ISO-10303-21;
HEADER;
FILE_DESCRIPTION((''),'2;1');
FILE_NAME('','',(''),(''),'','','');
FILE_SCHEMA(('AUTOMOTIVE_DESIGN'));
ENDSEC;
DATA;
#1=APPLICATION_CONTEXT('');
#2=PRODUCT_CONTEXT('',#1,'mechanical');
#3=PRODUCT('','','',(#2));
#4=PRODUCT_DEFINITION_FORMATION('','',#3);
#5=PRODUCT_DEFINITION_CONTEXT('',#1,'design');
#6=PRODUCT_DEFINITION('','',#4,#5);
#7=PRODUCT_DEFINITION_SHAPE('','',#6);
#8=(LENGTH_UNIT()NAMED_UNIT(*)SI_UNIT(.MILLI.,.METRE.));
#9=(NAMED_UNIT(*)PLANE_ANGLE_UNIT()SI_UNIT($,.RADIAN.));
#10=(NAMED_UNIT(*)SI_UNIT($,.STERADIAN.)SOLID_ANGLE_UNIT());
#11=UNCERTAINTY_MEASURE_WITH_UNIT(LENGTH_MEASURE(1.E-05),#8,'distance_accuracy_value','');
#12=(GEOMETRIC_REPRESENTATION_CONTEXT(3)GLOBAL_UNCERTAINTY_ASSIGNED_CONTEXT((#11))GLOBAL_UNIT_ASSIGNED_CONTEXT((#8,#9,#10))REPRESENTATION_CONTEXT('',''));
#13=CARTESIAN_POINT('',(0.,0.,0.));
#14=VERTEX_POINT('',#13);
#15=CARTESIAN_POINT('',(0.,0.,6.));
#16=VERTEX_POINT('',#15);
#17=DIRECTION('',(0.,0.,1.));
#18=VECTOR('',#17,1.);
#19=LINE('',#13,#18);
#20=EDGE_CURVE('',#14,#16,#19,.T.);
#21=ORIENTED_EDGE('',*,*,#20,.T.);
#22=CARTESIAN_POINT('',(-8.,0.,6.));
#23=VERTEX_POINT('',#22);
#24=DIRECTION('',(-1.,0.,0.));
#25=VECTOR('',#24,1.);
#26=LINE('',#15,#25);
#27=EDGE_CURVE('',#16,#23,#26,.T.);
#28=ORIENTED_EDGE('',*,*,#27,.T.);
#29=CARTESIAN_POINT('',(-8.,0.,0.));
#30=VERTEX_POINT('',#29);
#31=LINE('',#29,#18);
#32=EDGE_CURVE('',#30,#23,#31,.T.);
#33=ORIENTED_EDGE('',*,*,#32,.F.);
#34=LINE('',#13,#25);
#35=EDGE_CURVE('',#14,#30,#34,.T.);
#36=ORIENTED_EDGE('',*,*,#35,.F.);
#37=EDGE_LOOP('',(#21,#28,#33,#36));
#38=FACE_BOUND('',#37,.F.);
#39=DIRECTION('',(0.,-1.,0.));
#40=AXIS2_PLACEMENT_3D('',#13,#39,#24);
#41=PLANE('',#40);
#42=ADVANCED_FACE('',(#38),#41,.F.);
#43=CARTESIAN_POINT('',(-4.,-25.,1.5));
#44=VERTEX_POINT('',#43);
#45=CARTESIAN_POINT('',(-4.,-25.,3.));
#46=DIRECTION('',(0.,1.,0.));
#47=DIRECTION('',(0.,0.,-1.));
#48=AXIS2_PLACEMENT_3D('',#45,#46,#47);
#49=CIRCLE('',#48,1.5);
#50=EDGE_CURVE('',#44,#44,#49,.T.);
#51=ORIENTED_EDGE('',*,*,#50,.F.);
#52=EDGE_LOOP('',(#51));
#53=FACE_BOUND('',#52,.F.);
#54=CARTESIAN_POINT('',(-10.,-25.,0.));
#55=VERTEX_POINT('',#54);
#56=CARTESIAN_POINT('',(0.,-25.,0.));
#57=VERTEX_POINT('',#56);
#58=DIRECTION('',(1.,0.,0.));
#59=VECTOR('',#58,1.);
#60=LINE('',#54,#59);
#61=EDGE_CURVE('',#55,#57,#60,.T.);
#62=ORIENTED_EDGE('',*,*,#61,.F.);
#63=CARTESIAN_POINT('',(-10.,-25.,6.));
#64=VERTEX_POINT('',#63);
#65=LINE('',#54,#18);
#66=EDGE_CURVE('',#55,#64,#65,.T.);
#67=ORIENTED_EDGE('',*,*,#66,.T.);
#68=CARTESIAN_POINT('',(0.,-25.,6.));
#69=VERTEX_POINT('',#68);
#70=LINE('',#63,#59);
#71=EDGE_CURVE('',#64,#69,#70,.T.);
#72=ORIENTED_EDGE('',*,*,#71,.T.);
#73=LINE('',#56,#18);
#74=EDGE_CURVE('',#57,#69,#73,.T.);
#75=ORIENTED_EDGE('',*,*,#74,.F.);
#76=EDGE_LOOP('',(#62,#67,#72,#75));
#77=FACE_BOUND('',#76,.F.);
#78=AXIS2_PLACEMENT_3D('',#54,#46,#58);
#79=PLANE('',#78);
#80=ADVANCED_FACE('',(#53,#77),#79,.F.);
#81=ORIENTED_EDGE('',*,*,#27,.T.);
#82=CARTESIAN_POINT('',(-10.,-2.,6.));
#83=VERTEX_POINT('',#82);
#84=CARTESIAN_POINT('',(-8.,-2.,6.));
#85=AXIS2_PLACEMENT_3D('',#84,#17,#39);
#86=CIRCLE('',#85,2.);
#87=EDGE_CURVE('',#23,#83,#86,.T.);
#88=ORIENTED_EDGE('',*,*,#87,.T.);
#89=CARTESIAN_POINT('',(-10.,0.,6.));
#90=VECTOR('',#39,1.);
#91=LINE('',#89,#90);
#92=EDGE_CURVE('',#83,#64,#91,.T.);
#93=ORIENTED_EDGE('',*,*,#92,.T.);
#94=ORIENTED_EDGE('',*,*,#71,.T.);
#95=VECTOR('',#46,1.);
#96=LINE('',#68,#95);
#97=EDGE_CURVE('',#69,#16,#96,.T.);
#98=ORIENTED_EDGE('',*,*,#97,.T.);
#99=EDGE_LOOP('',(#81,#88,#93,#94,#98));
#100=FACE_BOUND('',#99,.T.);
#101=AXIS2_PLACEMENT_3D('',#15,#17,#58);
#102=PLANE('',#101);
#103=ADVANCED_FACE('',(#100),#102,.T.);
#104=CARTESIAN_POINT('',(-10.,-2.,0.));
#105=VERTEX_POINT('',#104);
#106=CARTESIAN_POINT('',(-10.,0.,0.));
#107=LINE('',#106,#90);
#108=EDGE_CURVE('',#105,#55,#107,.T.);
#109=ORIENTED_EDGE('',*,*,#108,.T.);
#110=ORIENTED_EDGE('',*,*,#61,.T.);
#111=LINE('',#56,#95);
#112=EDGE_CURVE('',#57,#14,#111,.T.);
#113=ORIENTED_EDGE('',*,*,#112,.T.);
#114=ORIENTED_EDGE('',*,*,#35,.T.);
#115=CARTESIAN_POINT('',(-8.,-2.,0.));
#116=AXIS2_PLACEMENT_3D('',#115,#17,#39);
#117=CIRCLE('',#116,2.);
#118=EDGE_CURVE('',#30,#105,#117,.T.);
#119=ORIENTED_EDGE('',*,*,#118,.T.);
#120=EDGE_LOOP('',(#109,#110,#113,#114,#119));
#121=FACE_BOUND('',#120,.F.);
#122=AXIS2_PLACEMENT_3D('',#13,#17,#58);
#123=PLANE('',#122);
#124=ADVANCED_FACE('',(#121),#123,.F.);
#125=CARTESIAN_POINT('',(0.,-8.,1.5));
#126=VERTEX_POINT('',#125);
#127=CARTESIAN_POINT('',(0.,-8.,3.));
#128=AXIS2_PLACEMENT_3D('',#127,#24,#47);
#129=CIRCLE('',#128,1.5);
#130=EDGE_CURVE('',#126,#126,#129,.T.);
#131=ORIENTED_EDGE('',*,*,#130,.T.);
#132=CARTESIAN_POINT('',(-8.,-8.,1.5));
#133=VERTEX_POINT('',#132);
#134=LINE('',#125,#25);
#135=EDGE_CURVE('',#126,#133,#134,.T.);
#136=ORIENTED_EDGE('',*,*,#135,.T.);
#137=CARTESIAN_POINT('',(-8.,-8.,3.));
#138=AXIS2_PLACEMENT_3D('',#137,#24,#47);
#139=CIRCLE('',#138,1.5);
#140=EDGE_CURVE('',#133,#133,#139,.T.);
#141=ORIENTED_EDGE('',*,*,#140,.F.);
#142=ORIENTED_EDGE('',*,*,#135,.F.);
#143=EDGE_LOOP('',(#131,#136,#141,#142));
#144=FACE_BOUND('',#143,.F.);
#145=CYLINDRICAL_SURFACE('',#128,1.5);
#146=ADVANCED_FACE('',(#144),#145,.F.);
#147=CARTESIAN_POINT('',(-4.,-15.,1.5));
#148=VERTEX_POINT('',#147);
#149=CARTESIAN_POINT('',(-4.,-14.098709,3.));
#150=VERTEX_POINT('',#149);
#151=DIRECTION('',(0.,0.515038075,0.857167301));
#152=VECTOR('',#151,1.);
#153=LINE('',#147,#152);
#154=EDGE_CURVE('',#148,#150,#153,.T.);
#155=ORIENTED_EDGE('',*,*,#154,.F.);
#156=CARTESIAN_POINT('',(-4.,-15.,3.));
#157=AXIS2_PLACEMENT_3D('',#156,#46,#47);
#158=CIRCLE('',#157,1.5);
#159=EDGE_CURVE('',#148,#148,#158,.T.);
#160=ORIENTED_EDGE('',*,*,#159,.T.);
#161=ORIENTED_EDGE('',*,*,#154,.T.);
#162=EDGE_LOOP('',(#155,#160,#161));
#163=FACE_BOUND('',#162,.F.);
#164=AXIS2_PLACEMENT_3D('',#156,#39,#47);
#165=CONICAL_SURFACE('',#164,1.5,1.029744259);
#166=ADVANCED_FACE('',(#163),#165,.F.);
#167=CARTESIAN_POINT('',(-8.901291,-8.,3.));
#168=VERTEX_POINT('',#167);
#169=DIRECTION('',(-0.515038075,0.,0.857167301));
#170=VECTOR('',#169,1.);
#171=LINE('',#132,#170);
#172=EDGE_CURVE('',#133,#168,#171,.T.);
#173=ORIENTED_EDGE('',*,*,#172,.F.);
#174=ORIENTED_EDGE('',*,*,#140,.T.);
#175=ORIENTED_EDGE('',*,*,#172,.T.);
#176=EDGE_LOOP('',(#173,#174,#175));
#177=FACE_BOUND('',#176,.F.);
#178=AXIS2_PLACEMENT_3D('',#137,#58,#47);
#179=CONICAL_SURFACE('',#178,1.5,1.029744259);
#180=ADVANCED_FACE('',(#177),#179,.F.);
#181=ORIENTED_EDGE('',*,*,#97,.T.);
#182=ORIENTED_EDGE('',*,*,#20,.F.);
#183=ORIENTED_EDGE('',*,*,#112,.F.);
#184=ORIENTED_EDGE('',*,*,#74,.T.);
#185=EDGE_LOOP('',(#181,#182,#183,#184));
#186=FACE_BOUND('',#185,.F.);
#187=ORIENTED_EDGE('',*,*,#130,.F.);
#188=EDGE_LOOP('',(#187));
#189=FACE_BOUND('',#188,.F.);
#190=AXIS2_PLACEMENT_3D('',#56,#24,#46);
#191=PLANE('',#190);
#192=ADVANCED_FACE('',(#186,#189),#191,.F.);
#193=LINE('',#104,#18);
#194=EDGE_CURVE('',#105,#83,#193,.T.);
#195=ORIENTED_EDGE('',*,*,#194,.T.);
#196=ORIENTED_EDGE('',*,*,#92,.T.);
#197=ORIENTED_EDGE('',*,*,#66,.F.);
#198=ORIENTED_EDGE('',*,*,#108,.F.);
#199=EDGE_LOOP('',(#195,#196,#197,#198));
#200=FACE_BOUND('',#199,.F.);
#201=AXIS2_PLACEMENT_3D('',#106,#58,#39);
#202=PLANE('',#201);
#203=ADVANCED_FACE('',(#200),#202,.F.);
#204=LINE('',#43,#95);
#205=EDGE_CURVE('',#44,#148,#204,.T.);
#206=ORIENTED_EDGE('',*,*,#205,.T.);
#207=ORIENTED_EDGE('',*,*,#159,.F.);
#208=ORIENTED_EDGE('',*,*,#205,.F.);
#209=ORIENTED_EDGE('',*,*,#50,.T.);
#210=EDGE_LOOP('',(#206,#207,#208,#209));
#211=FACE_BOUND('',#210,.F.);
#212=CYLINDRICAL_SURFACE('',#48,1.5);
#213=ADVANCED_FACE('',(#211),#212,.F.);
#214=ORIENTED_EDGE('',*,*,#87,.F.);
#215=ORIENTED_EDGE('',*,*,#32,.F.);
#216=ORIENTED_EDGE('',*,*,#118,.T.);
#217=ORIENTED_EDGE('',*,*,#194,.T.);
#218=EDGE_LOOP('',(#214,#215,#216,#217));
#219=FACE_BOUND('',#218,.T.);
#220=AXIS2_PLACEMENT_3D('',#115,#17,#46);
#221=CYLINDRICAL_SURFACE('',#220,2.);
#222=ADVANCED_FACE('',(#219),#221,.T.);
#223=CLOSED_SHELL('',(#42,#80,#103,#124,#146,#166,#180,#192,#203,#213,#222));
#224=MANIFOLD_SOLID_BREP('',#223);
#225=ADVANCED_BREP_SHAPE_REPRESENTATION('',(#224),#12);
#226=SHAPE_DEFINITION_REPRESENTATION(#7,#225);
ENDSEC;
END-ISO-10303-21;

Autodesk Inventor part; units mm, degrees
ref_plane "YZ Plane" through (0, 0, 0) normal (1, 0, 0) x (0, 1, 0)
ref_plane "XZ Plane" through (0, 0, 0) normal (0, 1, 0) x (-1, 0, 0)
ref_plane "XY Plane" through (0, 0, 0) normal (0, 0, 1) x (1, 0, 0)
sketch "Skizze3" plane through (0, 0, 0) normal (0, 0, 1) x (1, 0, 0)
  line L0 (0, 0) -> (-10, 0)
  line L1 (-10, 0) -> (-10, -25)
  line L2 (-10, -25) -> (0, -25)
  line L3 (0, -25) -> (0, 0)
  dimension "d4" = 10
  dimension "d5" = 25
extrude "Extrusion3" add sketch "Skizze3" along normal blind 6
sketch "Skizze4" plane through (-10, -25, 0) normal (0, -1, 0) x (1, 0, 0)
  line L0 (10, 0) -> (10, 6) projected
  line L1 (0, 0) -> (0, 6) projected
  point P0 (6, 3)
  point P1 (0, 3)
  dimension "d8" = 4
hole "Bohrung1" at (-4, -25, 3) direction (0, 1, 0) diameter 3 depth 10 tip angle 118
thread "Gewinde1" size "M3x0.5" class "6H" standard "ISO Metric profile" length 8
sketch "Skizze5" plane through (0, -25, 0) normal (1, 0, 0) x (0, 0, -1)
  line L0 (0, 25) -> (-6, 25) projected
  line L1 (0, 0) -> (-6, 0) projected
  point P0 (-3, 17)
  point P1 (-3, 25)
  dimension "d18" = 17
hole "Bohrung2" at (0, -8, 3) direction (-1, 0, 0) diameter 3 depth 8 tip angle 118
thread "Gewinde2" size "M3x0.5" class "6H" standard "ISO Metric profile" length 6
fillet "Rundung1" radius 2 1 edges at (-10, 0, 3)
properties part number "getriebe_winkel" material "Acryl"
